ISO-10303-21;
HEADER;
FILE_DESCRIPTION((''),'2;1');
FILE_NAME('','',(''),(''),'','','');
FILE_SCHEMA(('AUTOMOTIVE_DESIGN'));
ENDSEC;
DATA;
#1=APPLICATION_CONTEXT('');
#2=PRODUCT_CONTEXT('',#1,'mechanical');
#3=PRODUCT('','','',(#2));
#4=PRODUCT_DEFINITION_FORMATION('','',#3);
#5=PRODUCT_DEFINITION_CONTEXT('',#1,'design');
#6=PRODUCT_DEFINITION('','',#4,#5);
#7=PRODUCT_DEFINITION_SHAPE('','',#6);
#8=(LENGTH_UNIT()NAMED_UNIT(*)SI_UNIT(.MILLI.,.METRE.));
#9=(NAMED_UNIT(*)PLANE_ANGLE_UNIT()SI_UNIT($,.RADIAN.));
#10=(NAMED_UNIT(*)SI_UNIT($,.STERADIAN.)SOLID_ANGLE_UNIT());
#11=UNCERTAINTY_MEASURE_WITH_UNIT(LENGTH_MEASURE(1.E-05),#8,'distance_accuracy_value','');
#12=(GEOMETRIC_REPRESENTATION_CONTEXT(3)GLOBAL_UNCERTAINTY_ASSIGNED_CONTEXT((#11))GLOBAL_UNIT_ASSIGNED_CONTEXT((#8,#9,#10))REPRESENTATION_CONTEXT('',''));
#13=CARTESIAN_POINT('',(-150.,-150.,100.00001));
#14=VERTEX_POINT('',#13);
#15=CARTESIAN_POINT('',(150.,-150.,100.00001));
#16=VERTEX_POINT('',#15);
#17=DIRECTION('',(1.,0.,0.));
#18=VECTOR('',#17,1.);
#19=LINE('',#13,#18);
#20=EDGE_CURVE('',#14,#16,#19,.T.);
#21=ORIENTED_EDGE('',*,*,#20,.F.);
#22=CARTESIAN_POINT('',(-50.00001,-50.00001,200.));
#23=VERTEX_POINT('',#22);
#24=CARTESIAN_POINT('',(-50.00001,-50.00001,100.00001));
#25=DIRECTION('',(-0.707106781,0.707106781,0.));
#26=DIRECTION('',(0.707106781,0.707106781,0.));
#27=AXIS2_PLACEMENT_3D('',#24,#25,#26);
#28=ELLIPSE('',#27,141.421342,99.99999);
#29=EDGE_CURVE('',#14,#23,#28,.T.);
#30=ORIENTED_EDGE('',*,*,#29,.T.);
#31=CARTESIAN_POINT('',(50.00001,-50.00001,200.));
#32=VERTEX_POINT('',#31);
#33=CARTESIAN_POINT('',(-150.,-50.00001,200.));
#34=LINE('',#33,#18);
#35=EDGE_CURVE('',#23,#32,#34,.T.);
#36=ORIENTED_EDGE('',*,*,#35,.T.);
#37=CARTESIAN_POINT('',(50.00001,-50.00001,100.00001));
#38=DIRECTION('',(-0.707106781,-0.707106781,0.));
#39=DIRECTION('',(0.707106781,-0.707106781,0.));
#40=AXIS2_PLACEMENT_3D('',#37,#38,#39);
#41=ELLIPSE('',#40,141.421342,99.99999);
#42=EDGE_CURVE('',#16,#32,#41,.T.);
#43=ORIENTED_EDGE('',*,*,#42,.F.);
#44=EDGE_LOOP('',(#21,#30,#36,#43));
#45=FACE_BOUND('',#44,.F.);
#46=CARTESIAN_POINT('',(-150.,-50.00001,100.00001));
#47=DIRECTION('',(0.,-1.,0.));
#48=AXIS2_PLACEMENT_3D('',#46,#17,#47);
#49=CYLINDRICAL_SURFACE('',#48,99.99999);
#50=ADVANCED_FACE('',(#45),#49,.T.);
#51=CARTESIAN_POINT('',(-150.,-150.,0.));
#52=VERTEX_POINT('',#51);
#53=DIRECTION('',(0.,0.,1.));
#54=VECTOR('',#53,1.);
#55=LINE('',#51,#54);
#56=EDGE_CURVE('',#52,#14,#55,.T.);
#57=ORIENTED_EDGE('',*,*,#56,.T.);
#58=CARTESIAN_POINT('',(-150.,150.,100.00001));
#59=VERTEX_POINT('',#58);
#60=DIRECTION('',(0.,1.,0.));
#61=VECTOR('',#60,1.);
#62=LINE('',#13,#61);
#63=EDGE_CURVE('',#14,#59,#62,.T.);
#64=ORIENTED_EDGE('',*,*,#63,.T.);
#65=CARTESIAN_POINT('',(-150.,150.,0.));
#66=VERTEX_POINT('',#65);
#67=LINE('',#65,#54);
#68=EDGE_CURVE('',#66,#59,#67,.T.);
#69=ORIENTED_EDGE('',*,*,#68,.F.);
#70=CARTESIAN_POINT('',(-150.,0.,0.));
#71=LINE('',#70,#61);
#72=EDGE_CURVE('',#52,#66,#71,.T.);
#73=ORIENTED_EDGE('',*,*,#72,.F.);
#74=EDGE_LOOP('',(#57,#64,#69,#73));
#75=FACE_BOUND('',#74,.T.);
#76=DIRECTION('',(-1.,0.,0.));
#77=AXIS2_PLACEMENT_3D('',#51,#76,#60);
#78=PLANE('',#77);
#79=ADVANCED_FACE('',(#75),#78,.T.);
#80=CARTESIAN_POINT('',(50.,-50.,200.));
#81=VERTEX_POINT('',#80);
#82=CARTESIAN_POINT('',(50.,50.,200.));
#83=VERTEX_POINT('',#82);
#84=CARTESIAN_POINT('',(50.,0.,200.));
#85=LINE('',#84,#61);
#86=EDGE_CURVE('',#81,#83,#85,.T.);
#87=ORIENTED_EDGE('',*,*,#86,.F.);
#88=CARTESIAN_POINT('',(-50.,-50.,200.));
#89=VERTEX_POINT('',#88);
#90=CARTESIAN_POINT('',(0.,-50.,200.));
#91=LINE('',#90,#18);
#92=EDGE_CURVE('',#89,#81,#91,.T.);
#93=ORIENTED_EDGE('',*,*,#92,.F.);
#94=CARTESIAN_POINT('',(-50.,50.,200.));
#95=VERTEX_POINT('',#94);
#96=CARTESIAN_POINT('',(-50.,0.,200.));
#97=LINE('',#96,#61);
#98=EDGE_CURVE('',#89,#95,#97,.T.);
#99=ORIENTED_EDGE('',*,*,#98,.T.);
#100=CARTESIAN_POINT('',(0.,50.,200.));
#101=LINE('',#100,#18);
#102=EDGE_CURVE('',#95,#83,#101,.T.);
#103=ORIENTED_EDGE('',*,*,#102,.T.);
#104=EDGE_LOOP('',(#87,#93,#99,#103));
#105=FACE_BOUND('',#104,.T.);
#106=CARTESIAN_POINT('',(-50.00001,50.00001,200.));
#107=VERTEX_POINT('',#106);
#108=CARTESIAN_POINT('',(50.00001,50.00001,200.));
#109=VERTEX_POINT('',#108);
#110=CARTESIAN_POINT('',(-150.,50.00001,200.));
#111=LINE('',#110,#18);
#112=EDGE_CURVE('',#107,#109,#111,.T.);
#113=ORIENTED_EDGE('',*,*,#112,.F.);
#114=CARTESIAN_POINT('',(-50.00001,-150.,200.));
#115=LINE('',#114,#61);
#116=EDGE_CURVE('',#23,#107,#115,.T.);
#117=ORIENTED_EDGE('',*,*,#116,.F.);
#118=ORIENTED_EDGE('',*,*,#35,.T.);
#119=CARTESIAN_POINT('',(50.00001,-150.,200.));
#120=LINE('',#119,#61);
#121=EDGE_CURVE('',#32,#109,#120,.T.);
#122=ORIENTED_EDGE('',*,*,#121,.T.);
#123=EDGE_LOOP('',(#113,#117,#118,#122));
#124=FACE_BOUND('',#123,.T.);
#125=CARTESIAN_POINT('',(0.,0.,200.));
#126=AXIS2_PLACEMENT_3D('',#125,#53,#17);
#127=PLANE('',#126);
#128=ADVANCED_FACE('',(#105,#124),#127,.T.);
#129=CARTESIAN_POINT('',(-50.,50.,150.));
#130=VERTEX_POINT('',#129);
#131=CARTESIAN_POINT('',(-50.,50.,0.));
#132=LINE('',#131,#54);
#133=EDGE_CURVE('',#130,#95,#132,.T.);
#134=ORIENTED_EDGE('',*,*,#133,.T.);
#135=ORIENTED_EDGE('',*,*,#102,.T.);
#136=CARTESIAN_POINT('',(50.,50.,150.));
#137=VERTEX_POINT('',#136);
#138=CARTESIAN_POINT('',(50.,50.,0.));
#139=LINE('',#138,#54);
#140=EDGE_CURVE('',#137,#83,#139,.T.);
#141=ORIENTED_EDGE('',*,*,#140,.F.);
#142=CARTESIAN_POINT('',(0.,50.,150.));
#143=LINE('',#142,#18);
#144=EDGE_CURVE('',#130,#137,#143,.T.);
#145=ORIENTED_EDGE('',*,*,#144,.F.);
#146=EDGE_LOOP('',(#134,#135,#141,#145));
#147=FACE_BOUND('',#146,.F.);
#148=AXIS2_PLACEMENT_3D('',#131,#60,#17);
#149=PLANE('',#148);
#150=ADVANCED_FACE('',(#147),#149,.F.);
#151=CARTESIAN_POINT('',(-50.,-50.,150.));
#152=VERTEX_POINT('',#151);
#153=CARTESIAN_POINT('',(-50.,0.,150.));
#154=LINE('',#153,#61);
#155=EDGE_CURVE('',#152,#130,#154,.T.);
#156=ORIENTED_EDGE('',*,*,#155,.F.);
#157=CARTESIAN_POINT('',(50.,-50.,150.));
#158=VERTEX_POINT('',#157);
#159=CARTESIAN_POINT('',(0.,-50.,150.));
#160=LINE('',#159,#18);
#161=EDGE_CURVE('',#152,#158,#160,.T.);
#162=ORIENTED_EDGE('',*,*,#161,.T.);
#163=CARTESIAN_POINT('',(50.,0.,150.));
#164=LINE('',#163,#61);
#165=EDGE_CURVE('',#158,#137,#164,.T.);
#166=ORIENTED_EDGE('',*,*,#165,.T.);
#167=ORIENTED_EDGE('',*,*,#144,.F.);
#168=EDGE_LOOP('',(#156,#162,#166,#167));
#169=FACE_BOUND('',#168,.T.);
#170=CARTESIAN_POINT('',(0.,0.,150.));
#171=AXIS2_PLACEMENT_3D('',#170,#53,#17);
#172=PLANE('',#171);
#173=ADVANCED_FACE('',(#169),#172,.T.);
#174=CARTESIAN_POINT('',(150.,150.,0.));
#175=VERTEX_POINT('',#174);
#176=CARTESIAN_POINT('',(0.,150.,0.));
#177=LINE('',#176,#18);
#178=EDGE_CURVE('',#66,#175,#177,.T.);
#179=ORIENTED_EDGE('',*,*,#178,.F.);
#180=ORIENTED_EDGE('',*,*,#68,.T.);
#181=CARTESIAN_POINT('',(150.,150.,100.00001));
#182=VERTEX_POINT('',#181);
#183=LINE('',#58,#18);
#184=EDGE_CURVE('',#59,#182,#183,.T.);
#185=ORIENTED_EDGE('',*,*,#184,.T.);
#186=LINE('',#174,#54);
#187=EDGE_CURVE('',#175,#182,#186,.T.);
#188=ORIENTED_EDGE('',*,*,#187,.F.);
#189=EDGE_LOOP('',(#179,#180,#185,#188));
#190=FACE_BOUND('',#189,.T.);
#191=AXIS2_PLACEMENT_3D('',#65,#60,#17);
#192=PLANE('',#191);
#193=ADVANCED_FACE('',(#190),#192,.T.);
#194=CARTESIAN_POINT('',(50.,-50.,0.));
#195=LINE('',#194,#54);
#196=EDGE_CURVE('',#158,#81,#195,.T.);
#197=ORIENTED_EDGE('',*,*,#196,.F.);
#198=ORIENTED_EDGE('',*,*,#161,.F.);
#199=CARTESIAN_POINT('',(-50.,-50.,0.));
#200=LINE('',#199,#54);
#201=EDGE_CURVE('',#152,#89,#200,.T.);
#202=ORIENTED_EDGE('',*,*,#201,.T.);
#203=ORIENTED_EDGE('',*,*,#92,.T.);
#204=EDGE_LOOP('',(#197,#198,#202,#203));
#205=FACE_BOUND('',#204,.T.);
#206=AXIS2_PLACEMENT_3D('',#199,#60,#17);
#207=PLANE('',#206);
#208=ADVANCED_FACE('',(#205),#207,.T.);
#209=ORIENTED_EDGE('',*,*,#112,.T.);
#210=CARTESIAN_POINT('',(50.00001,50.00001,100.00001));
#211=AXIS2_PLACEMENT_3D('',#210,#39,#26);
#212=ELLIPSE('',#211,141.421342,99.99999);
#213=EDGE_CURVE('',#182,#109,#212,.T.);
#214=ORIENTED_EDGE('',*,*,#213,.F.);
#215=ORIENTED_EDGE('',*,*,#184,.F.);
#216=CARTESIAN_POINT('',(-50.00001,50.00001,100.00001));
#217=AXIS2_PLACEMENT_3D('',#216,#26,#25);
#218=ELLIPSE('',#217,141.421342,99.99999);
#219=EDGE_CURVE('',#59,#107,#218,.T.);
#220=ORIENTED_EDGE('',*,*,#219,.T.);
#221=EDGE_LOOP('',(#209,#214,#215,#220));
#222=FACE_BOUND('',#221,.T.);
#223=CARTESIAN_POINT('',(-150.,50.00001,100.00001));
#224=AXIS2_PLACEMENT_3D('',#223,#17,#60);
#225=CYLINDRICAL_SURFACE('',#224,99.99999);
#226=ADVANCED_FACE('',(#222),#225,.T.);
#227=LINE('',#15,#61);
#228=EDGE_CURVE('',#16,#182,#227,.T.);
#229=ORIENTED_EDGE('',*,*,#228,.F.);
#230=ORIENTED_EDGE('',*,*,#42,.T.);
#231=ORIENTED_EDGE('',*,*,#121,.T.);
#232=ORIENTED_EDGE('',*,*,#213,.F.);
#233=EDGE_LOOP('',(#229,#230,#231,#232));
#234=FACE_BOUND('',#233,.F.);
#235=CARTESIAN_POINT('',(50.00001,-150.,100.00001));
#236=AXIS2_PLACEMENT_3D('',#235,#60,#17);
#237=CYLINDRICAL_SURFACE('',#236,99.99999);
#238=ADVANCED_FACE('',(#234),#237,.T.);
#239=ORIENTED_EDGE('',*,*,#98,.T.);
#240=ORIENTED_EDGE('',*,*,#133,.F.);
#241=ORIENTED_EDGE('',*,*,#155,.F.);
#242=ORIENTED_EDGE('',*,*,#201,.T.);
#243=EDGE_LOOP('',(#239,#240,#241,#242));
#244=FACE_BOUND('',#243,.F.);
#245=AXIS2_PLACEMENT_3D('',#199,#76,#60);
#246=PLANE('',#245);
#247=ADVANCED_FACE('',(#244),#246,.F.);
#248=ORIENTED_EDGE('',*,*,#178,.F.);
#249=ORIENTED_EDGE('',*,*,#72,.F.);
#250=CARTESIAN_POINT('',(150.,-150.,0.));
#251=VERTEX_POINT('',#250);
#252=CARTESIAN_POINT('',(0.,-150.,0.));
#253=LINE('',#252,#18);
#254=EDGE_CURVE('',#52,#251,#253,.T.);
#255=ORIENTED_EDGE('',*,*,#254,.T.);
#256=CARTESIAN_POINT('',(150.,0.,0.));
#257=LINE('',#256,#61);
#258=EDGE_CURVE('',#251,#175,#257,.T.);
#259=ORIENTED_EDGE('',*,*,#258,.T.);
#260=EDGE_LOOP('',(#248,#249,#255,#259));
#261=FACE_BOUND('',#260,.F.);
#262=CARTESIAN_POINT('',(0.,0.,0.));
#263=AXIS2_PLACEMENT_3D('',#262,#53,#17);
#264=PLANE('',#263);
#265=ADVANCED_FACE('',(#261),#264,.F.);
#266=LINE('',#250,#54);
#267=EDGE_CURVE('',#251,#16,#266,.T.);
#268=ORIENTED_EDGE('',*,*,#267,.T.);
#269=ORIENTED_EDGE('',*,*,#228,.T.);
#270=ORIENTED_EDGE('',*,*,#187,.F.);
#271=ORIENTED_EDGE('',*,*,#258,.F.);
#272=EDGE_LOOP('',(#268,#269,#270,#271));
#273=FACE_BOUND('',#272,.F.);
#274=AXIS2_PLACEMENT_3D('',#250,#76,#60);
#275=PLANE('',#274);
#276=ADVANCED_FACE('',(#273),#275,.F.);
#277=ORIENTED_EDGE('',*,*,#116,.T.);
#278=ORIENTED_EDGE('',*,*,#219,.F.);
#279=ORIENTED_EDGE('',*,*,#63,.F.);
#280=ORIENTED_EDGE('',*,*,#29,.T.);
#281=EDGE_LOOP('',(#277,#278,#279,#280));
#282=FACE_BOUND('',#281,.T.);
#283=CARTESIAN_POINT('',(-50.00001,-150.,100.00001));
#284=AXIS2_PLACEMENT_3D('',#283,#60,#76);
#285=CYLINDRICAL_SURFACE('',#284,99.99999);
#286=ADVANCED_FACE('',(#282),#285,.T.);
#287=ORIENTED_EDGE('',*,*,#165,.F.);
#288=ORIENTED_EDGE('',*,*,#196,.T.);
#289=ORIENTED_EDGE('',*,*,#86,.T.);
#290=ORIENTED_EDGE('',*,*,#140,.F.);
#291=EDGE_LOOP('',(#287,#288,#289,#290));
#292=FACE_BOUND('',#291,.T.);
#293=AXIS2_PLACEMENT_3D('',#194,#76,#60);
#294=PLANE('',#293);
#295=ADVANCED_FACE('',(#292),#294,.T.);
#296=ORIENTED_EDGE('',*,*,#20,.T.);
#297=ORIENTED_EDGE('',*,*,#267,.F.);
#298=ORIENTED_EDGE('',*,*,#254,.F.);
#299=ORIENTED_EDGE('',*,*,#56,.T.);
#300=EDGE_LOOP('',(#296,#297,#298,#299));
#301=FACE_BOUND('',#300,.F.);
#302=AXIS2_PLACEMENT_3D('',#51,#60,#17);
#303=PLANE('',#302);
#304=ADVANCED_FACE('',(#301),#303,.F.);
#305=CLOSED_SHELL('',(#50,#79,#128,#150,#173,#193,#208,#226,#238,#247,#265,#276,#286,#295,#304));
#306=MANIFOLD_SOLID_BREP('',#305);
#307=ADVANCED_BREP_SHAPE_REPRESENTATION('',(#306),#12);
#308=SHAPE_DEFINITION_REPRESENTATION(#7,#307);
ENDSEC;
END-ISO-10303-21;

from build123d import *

# Parameters (mm, degrees)
F0_W     = 300
F0_H     = 300
F0_W_2   = 100
F0_H_2   = 100
F1_DEPTH = 200
F2_DEPTH = 150
F3_R     = 99.99999


# Not quite as in the source:
# - a fillet or chamfer is up to 0.001 mm smaller than in the source, because OpenCascade refuses the exact size


with BuildPart() as f1:
    # F0 (on Top) → F1 (new body)
    with BuildSketch(Plane.XY):
        Rectangle(F0_W, F0_H)
        Rectangle(F0_W_2, F0_H_2, mode=Mode.SUBTRACT)
    extrude(amount=F1_DEPTH)

    # F0 (on Top) → F2 (join)
    with BuildSketch(Plane.XY):
        Rectangle(F0_W_2, F0_H_2)
    extrude(amount=F2_DEPTH)

    # F3 (radius 100 in the source; OpenCascade refuses exactly that, so slightly less here)
    f3_edges = [f1.edges().sort_by_distance(p)[0] for p in [
        (-150, 0, 200),
        (0, -150, 200),
        (150, 0, 200),
        (0, 150, 200),
    ]]
    fillet(f3_edges, radius=F3_R)


solid = f1.part
